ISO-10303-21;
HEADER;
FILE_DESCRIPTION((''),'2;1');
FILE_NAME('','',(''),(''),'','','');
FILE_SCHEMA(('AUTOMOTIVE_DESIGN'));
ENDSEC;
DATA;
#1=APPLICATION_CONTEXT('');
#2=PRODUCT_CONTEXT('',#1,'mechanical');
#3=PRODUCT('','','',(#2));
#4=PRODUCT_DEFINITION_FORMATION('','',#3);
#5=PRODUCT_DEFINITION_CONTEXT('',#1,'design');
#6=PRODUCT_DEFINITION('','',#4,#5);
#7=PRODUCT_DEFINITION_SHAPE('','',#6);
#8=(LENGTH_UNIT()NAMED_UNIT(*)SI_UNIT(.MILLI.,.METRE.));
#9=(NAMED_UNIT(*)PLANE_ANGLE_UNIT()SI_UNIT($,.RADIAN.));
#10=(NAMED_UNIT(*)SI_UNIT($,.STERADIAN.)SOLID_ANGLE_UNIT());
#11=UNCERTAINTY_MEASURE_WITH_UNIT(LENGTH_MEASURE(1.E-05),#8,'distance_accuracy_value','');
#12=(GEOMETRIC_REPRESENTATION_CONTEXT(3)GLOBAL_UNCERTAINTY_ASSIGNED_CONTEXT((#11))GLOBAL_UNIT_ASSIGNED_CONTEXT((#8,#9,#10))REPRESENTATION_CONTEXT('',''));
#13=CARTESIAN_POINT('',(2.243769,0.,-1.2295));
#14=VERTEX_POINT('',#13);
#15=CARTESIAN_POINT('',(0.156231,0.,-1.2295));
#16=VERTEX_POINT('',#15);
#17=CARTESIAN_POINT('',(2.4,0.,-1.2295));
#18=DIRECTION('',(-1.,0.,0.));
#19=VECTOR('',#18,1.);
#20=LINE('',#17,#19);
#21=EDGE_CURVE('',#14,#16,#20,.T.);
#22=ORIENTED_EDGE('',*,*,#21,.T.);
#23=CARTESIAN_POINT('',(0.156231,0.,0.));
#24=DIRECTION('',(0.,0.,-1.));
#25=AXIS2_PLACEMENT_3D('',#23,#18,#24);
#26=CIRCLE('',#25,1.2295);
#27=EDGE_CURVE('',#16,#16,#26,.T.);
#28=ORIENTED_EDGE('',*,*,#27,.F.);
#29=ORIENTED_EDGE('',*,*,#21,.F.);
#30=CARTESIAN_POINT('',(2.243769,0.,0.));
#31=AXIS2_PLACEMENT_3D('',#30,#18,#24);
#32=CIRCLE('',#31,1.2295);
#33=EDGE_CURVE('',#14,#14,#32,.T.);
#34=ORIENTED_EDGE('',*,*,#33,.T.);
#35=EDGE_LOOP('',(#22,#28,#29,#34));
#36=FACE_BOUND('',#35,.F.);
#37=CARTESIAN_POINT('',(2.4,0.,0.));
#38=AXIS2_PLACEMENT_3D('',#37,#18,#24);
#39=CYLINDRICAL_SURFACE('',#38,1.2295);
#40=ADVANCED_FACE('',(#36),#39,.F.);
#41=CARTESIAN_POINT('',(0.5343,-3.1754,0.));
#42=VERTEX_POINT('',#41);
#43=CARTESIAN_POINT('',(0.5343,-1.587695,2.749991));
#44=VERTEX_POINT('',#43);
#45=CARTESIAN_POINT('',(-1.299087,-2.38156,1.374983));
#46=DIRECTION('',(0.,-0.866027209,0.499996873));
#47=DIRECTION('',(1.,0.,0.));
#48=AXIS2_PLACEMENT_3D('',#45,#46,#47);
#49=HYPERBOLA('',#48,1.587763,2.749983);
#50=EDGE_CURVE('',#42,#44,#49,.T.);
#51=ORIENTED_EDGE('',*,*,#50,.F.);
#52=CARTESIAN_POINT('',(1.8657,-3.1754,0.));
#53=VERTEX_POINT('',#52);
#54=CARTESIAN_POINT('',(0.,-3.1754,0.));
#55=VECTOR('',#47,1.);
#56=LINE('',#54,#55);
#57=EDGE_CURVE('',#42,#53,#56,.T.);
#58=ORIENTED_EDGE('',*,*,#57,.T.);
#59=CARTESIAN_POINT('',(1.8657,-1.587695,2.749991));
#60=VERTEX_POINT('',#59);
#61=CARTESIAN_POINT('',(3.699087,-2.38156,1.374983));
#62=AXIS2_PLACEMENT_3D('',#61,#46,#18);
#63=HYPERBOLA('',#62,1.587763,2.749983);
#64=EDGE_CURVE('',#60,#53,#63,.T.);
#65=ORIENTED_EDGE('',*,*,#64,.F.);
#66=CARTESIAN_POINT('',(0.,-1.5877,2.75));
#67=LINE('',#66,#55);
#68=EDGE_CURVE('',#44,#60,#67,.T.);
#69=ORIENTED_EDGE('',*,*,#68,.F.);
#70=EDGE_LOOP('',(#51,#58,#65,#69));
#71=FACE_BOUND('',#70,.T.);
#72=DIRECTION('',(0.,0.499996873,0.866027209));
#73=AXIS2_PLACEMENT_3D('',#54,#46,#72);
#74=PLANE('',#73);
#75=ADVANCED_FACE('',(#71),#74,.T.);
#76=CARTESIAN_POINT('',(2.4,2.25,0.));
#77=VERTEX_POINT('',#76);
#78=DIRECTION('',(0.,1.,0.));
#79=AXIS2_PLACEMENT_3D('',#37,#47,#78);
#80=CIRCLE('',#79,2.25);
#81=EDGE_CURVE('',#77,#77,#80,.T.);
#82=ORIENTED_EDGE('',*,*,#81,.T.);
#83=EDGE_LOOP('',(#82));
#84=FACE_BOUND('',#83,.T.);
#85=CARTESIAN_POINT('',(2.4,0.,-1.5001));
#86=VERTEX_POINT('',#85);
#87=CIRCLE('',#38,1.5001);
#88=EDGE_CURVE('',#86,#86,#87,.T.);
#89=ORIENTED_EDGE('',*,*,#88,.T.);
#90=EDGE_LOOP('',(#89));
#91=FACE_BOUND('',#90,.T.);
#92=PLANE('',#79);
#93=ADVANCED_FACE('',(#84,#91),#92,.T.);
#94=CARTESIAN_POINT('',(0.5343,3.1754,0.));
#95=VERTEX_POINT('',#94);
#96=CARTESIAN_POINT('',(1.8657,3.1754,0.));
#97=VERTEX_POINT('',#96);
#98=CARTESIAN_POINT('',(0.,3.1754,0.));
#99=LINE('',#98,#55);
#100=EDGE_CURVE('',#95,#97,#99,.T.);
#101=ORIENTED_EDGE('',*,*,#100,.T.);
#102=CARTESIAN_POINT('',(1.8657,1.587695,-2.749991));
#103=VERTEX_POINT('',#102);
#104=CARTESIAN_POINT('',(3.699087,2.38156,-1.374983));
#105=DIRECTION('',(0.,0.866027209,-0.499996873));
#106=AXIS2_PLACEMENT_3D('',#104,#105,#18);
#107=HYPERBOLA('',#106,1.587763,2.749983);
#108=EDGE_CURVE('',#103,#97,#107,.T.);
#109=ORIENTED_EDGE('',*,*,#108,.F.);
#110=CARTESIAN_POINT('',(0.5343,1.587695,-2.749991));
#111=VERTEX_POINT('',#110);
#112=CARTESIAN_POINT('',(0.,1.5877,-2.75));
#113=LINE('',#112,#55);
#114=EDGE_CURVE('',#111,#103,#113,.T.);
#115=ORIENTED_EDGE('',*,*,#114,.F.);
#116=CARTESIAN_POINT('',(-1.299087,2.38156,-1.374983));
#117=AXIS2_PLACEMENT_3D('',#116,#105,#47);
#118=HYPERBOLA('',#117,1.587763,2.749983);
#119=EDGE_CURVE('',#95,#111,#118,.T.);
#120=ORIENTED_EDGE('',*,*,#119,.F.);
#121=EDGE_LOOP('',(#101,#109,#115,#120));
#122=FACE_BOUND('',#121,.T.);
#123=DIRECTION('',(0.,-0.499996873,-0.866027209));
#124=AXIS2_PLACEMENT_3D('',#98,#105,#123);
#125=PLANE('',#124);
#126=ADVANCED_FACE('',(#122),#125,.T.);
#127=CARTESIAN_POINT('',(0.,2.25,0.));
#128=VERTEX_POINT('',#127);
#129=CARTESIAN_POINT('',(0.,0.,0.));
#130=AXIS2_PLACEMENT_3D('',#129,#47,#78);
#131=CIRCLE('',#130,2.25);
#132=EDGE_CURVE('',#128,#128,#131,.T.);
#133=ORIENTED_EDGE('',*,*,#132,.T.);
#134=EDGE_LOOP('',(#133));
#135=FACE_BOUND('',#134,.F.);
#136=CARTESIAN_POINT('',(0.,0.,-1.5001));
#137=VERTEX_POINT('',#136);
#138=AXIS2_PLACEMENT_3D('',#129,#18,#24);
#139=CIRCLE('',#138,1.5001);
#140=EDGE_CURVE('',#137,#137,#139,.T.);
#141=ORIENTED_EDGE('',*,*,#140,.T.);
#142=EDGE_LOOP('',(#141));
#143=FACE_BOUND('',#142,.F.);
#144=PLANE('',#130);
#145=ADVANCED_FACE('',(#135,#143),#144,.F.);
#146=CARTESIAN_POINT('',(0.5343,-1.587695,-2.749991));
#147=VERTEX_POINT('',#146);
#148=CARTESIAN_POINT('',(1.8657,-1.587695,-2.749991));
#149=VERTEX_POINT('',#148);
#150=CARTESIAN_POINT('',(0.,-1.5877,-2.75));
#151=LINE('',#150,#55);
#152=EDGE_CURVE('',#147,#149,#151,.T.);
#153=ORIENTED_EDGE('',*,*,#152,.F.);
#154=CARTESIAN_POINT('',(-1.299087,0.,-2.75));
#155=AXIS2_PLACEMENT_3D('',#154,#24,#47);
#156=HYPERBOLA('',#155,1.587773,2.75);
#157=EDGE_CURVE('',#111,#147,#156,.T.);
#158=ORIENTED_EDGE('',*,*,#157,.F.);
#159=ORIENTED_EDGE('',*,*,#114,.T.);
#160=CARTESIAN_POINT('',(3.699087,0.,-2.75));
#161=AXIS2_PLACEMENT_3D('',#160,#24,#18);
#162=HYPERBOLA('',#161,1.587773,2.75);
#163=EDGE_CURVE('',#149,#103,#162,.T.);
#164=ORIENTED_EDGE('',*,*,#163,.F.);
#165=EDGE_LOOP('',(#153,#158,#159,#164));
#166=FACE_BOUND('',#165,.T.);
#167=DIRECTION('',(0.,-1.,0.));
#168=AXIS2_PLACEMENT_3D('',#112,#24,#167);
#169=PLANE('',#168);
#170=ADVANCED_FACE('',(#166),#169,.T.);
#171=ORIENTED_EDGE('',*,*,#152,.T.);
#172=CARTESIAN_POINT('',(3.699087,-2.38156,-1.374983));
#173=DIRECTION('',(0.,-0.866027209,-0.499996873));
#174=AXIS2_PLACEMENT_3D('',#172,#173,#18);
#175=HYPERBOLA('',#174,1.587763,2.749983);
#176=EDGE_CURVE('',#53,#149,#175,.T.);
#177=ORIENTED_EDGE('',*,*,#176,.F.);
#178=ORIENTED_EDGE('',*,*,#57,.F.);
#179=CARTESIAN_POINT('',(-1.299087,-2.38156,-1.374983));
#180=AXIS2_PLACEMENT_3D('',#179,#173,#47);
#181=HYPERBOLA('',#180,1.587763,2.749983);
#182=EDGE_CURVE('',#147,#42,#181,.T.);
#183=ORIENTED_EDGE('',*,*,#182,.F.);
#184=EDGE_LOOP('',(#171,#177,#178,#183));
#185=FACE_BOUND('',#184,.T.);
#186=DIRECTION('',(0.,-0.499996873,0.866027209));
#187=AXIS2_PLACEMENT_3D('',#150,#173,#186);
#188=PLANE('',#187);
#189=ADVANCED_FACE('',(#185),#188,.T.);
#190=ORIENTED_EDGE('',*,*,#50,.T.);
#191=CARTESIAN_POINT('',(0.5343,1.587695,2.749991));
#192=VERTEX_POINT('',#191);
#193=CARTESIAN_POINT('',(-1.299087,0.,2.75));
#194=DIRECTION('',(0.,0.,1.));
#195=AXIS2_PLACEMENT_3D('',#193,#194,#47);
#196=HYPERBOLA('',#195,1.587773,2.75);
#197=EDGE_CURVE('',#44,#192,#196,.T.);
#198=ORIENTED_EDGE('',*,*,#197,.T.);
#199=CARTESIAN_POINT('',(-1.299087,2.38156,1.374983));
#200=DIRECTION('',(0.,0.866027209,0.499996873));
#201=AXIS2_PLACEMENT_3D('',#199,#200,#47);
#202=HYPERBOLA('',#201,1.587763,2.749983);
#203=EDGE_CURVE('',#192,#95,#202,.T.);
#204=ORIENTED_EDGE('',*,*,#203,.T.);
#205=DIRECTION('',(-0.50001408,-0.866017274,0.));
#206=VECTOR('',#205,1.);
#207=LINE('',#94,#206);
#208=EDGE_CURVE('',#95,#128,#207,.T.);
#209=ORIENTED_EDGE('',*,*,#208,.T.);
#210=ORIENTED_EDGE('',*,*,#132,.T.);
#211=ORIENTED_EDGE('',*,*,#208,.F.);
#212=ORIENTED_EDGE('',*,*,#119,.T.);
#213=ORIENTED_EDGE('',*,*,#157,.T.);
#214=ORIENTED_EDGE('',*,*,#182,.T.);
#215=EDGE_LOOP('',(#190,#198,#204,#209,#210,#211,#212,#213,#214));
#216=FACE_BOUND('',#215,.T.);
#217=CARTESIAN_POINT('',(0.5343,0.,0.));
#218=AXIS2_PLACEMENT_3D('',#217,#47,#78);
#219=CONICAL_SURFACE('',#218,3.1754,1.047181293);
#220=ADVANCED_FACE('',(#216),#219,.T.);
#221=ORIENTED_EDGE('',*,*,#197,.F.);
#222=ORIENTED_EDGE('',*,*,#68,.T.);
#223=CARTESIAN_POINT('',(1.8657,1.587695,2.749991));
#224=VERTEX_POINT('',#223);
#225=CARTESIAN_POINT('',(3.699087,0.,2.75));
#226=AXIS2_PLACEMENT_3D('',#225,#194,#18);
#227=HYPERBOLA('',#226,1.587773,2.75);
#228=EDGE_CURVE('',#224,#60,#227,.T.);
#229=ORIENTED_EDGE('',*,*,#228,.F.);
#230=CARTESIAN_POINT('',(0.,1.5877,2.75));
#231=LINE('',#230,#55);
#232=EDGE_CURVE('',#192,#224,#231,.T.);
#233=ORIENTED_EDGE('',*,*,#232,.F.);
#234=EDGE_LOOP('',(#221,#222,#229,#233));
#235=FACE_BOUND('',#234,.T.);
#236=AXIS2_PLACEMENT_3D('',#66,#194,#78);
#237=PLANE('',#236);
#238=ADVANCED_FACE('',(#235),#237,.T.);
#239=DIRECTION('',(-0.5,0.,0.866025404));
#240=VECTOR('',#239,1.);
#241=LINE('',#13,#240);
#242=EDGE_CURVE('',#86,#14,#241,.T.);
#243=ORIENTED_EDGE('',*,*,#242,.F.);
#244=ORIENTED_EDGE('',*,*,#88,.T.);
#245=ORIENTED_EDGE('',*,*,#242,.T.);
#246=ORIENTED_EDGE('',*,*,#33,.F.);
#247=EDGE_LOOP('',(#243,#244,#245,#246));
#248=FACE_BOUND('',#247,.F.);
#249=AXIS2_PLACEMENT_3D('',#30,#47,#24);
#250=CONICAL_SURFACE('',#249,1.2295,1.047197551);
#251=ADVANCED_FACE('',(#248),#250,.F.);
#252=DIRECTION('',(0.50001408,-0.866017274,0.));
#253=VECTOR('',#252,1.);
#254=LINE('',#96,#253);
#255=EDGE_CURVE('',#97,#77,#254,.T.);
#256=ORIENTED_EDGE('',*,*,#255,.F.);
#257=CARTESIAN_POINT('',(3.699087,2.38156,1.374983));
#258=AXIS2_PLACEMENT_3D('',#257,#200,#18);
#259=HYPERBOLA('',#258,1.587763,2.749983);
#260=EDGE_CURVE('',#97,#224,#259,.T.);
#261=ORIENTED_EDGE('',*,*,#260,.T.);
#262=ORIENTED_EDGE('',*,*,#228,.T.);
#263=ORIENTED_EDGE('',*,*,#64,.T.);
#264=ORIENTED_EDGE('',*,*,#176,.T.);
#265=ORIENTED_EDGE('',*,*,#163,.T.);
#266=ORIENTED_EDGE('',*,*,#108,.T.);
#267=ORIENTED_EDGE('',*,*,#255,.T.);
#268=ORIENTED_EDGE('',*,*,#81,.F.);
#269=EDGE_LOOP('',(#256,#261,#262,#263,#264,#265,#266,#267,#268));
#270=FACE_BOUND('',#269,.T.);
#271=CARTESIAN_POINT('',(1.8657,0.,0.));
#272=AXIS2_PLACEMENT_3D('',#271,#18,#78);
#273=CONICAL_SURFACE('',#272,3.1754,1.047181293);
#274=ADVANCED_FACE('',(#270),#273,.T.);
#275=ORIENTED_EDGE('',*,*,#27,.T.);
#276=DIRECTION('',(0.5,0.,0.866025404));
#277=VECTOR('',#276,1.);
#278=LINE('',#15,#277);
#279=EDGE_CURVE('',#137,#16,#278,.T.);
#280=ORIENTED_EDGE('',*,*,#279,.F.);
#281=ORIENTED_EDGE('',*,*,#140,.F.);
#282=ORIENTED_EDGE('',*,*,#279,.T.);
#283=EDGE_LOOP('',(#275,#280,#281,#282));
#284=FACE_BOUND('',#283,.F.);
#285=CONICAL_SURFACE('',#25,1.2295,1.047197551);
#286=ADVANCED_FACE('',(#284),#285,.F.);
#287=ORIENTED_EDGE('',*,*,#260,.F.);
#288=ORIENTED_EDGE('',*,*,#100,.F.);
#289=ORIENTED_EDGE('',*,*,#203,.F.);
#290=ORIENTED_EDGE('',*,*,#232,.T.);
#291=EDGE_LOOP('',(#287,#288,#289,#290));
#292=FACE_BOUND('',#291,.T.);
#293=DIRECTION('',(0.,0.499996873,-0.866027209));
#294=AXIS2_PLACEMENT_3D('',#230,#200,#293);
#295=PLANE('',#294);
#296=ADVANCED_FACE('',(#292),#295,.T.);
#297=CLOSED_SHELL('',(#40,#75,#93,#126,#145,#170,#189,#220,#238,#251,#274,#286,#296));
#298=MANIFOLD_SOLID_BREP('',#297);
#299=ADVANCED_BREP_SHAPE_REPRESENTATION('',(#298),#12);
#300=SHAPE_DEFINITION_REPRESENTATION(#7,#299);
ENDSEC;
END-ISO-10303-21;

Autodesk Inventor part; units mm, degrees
ref_plane "YZ Plane" through (0, 0, 0) normal (1, 0, 0) x (0, 1, 0)
ref_plane "XZ Plane" through (0, 0, 0) normal (0, 1, 0) x (-1, 0, 0)
sketch "Esquisse1" plane through (0, 0, 0) normal (1, 0, 0) x (0, 1, 0)
  line L0 (-3.1754, 0) -> (-1.5877, 2.75)
  line L1 (-1.5877, 2.75) -> (1.5877, 2.75)
  line L2 (1.5877, 2.75) -> (3.1754, 0)
  line L3 (3.1754, 0) -> (1.5877, -2.75)
  line L4 (1.5877, -2.75) -> (-1.5877, -2.75)
  line L5 (-1.5877, -2.75) -> (-3.1754, 0)
  point P0 (0, 0)
  point P1 (0, 0)
  dimension "d0" = 6.3509
extrude "Corps" add sketch "Esquisse1" along normal blind 2.4
sketch "Esquisse2" plane through (0, 0, 0) normal (0, 0, 1) x (1, 0, 0)
  line L0 (0, 1.5877) -> (0, 3.1754) projected
  line L1 (0, 3.1754) -> (2.4, 3.1754) projected
  line L2 (2.4, 1.5877) -> (2.4, 3.1754) projected
  line L3 (-0.48, 0) -> (2.88, 0) projected
  line L4 (0.5343, 3.1754) -> (0, 2.25)
  line L5 (1.8657, 3.1754) -> (2.4, 2.25)
  dimension "d3" = 30
  dimension "d4" = 30
  dimension "d5" = 4.5
  dimension "d6" = 4.5
revolve "Chanfrein1" cut sketch "Esquisse2" angle 360 about axis through (-10, 0, 0) along (1, 0, 0)
sketch "Esquisse3" plane through (2.4, 0, 0) normal (1, 0, 0) x (0, 0, -1)
  arc A0 (-0.625, -1.0825) -> (0.625, -1.0825) centre (0, 0) ccw projected
hole "Filetage" at (2.4, 0, 0) direction (-1, 0, 0) diameter 2.459 end through all thread size "M3x0.5" class "6H" standard "ISO Metric profile"
chamfer "Chanfrein2" distance 0.2706 angle 30 1 edges at (2.4, 0, 1.2295) measured on face at (2.4, 1.8851, -0.2289)
chamfer "Chanfrein3" distance 0.2706 angle 30 1 edges at (0, 0, 1.2295) measured on face at (0, 1.8851, -0.2289)
ref_plane "Work Plane1" through (-6.3375, 0, 0) normal (0, -0.8660254, -0.5) x (1, 0, 0)
equation "\"d0\" = 1.1547 * SW"
equation "\"d1\" = KOH"
equation "\"d3\" = ANG1"
equation "\"d4\" = ANG2"
equation "\"d5\" = SW0"
equation "\"d6\" = SW01"
equation "\"d8\" = -0.5 * GD1 + 0.5 * NND"
equation "\"d40\" = -0.5 * GD1 + 0.5 * NND"
equation "\"d10\" = -0.5 * GD1 + 0.5 * NND"
equation "\"d41\" = -0.5 * GD1 + 0.5 * NND"
equation "\"ANG1\" = 30deg"
equation "\"ANG2\" = 30deg"
equation "\"NND\" = 3"
equation "\"KOH\" = 2.4"
equation "\"SW\" = 5.5"
equation "\"SW0\" = SW01"
equation "\"SW01\" = 4.5"
equation "\"GUL\" = 0.541266 * PTC"
equation "\"THREADDIA\" = 3"
equation "\"TOA\" = 30deg"
equation "\"PTC\" = 0.5"
equation "\"E0\" = 1.155 * SW"
equation "\"GAL\" = 0.541266 * PTC"
equation "\"GD1\" = 2.458734"
properties part number "DIN 934 - M3" material "Acier, doux"
